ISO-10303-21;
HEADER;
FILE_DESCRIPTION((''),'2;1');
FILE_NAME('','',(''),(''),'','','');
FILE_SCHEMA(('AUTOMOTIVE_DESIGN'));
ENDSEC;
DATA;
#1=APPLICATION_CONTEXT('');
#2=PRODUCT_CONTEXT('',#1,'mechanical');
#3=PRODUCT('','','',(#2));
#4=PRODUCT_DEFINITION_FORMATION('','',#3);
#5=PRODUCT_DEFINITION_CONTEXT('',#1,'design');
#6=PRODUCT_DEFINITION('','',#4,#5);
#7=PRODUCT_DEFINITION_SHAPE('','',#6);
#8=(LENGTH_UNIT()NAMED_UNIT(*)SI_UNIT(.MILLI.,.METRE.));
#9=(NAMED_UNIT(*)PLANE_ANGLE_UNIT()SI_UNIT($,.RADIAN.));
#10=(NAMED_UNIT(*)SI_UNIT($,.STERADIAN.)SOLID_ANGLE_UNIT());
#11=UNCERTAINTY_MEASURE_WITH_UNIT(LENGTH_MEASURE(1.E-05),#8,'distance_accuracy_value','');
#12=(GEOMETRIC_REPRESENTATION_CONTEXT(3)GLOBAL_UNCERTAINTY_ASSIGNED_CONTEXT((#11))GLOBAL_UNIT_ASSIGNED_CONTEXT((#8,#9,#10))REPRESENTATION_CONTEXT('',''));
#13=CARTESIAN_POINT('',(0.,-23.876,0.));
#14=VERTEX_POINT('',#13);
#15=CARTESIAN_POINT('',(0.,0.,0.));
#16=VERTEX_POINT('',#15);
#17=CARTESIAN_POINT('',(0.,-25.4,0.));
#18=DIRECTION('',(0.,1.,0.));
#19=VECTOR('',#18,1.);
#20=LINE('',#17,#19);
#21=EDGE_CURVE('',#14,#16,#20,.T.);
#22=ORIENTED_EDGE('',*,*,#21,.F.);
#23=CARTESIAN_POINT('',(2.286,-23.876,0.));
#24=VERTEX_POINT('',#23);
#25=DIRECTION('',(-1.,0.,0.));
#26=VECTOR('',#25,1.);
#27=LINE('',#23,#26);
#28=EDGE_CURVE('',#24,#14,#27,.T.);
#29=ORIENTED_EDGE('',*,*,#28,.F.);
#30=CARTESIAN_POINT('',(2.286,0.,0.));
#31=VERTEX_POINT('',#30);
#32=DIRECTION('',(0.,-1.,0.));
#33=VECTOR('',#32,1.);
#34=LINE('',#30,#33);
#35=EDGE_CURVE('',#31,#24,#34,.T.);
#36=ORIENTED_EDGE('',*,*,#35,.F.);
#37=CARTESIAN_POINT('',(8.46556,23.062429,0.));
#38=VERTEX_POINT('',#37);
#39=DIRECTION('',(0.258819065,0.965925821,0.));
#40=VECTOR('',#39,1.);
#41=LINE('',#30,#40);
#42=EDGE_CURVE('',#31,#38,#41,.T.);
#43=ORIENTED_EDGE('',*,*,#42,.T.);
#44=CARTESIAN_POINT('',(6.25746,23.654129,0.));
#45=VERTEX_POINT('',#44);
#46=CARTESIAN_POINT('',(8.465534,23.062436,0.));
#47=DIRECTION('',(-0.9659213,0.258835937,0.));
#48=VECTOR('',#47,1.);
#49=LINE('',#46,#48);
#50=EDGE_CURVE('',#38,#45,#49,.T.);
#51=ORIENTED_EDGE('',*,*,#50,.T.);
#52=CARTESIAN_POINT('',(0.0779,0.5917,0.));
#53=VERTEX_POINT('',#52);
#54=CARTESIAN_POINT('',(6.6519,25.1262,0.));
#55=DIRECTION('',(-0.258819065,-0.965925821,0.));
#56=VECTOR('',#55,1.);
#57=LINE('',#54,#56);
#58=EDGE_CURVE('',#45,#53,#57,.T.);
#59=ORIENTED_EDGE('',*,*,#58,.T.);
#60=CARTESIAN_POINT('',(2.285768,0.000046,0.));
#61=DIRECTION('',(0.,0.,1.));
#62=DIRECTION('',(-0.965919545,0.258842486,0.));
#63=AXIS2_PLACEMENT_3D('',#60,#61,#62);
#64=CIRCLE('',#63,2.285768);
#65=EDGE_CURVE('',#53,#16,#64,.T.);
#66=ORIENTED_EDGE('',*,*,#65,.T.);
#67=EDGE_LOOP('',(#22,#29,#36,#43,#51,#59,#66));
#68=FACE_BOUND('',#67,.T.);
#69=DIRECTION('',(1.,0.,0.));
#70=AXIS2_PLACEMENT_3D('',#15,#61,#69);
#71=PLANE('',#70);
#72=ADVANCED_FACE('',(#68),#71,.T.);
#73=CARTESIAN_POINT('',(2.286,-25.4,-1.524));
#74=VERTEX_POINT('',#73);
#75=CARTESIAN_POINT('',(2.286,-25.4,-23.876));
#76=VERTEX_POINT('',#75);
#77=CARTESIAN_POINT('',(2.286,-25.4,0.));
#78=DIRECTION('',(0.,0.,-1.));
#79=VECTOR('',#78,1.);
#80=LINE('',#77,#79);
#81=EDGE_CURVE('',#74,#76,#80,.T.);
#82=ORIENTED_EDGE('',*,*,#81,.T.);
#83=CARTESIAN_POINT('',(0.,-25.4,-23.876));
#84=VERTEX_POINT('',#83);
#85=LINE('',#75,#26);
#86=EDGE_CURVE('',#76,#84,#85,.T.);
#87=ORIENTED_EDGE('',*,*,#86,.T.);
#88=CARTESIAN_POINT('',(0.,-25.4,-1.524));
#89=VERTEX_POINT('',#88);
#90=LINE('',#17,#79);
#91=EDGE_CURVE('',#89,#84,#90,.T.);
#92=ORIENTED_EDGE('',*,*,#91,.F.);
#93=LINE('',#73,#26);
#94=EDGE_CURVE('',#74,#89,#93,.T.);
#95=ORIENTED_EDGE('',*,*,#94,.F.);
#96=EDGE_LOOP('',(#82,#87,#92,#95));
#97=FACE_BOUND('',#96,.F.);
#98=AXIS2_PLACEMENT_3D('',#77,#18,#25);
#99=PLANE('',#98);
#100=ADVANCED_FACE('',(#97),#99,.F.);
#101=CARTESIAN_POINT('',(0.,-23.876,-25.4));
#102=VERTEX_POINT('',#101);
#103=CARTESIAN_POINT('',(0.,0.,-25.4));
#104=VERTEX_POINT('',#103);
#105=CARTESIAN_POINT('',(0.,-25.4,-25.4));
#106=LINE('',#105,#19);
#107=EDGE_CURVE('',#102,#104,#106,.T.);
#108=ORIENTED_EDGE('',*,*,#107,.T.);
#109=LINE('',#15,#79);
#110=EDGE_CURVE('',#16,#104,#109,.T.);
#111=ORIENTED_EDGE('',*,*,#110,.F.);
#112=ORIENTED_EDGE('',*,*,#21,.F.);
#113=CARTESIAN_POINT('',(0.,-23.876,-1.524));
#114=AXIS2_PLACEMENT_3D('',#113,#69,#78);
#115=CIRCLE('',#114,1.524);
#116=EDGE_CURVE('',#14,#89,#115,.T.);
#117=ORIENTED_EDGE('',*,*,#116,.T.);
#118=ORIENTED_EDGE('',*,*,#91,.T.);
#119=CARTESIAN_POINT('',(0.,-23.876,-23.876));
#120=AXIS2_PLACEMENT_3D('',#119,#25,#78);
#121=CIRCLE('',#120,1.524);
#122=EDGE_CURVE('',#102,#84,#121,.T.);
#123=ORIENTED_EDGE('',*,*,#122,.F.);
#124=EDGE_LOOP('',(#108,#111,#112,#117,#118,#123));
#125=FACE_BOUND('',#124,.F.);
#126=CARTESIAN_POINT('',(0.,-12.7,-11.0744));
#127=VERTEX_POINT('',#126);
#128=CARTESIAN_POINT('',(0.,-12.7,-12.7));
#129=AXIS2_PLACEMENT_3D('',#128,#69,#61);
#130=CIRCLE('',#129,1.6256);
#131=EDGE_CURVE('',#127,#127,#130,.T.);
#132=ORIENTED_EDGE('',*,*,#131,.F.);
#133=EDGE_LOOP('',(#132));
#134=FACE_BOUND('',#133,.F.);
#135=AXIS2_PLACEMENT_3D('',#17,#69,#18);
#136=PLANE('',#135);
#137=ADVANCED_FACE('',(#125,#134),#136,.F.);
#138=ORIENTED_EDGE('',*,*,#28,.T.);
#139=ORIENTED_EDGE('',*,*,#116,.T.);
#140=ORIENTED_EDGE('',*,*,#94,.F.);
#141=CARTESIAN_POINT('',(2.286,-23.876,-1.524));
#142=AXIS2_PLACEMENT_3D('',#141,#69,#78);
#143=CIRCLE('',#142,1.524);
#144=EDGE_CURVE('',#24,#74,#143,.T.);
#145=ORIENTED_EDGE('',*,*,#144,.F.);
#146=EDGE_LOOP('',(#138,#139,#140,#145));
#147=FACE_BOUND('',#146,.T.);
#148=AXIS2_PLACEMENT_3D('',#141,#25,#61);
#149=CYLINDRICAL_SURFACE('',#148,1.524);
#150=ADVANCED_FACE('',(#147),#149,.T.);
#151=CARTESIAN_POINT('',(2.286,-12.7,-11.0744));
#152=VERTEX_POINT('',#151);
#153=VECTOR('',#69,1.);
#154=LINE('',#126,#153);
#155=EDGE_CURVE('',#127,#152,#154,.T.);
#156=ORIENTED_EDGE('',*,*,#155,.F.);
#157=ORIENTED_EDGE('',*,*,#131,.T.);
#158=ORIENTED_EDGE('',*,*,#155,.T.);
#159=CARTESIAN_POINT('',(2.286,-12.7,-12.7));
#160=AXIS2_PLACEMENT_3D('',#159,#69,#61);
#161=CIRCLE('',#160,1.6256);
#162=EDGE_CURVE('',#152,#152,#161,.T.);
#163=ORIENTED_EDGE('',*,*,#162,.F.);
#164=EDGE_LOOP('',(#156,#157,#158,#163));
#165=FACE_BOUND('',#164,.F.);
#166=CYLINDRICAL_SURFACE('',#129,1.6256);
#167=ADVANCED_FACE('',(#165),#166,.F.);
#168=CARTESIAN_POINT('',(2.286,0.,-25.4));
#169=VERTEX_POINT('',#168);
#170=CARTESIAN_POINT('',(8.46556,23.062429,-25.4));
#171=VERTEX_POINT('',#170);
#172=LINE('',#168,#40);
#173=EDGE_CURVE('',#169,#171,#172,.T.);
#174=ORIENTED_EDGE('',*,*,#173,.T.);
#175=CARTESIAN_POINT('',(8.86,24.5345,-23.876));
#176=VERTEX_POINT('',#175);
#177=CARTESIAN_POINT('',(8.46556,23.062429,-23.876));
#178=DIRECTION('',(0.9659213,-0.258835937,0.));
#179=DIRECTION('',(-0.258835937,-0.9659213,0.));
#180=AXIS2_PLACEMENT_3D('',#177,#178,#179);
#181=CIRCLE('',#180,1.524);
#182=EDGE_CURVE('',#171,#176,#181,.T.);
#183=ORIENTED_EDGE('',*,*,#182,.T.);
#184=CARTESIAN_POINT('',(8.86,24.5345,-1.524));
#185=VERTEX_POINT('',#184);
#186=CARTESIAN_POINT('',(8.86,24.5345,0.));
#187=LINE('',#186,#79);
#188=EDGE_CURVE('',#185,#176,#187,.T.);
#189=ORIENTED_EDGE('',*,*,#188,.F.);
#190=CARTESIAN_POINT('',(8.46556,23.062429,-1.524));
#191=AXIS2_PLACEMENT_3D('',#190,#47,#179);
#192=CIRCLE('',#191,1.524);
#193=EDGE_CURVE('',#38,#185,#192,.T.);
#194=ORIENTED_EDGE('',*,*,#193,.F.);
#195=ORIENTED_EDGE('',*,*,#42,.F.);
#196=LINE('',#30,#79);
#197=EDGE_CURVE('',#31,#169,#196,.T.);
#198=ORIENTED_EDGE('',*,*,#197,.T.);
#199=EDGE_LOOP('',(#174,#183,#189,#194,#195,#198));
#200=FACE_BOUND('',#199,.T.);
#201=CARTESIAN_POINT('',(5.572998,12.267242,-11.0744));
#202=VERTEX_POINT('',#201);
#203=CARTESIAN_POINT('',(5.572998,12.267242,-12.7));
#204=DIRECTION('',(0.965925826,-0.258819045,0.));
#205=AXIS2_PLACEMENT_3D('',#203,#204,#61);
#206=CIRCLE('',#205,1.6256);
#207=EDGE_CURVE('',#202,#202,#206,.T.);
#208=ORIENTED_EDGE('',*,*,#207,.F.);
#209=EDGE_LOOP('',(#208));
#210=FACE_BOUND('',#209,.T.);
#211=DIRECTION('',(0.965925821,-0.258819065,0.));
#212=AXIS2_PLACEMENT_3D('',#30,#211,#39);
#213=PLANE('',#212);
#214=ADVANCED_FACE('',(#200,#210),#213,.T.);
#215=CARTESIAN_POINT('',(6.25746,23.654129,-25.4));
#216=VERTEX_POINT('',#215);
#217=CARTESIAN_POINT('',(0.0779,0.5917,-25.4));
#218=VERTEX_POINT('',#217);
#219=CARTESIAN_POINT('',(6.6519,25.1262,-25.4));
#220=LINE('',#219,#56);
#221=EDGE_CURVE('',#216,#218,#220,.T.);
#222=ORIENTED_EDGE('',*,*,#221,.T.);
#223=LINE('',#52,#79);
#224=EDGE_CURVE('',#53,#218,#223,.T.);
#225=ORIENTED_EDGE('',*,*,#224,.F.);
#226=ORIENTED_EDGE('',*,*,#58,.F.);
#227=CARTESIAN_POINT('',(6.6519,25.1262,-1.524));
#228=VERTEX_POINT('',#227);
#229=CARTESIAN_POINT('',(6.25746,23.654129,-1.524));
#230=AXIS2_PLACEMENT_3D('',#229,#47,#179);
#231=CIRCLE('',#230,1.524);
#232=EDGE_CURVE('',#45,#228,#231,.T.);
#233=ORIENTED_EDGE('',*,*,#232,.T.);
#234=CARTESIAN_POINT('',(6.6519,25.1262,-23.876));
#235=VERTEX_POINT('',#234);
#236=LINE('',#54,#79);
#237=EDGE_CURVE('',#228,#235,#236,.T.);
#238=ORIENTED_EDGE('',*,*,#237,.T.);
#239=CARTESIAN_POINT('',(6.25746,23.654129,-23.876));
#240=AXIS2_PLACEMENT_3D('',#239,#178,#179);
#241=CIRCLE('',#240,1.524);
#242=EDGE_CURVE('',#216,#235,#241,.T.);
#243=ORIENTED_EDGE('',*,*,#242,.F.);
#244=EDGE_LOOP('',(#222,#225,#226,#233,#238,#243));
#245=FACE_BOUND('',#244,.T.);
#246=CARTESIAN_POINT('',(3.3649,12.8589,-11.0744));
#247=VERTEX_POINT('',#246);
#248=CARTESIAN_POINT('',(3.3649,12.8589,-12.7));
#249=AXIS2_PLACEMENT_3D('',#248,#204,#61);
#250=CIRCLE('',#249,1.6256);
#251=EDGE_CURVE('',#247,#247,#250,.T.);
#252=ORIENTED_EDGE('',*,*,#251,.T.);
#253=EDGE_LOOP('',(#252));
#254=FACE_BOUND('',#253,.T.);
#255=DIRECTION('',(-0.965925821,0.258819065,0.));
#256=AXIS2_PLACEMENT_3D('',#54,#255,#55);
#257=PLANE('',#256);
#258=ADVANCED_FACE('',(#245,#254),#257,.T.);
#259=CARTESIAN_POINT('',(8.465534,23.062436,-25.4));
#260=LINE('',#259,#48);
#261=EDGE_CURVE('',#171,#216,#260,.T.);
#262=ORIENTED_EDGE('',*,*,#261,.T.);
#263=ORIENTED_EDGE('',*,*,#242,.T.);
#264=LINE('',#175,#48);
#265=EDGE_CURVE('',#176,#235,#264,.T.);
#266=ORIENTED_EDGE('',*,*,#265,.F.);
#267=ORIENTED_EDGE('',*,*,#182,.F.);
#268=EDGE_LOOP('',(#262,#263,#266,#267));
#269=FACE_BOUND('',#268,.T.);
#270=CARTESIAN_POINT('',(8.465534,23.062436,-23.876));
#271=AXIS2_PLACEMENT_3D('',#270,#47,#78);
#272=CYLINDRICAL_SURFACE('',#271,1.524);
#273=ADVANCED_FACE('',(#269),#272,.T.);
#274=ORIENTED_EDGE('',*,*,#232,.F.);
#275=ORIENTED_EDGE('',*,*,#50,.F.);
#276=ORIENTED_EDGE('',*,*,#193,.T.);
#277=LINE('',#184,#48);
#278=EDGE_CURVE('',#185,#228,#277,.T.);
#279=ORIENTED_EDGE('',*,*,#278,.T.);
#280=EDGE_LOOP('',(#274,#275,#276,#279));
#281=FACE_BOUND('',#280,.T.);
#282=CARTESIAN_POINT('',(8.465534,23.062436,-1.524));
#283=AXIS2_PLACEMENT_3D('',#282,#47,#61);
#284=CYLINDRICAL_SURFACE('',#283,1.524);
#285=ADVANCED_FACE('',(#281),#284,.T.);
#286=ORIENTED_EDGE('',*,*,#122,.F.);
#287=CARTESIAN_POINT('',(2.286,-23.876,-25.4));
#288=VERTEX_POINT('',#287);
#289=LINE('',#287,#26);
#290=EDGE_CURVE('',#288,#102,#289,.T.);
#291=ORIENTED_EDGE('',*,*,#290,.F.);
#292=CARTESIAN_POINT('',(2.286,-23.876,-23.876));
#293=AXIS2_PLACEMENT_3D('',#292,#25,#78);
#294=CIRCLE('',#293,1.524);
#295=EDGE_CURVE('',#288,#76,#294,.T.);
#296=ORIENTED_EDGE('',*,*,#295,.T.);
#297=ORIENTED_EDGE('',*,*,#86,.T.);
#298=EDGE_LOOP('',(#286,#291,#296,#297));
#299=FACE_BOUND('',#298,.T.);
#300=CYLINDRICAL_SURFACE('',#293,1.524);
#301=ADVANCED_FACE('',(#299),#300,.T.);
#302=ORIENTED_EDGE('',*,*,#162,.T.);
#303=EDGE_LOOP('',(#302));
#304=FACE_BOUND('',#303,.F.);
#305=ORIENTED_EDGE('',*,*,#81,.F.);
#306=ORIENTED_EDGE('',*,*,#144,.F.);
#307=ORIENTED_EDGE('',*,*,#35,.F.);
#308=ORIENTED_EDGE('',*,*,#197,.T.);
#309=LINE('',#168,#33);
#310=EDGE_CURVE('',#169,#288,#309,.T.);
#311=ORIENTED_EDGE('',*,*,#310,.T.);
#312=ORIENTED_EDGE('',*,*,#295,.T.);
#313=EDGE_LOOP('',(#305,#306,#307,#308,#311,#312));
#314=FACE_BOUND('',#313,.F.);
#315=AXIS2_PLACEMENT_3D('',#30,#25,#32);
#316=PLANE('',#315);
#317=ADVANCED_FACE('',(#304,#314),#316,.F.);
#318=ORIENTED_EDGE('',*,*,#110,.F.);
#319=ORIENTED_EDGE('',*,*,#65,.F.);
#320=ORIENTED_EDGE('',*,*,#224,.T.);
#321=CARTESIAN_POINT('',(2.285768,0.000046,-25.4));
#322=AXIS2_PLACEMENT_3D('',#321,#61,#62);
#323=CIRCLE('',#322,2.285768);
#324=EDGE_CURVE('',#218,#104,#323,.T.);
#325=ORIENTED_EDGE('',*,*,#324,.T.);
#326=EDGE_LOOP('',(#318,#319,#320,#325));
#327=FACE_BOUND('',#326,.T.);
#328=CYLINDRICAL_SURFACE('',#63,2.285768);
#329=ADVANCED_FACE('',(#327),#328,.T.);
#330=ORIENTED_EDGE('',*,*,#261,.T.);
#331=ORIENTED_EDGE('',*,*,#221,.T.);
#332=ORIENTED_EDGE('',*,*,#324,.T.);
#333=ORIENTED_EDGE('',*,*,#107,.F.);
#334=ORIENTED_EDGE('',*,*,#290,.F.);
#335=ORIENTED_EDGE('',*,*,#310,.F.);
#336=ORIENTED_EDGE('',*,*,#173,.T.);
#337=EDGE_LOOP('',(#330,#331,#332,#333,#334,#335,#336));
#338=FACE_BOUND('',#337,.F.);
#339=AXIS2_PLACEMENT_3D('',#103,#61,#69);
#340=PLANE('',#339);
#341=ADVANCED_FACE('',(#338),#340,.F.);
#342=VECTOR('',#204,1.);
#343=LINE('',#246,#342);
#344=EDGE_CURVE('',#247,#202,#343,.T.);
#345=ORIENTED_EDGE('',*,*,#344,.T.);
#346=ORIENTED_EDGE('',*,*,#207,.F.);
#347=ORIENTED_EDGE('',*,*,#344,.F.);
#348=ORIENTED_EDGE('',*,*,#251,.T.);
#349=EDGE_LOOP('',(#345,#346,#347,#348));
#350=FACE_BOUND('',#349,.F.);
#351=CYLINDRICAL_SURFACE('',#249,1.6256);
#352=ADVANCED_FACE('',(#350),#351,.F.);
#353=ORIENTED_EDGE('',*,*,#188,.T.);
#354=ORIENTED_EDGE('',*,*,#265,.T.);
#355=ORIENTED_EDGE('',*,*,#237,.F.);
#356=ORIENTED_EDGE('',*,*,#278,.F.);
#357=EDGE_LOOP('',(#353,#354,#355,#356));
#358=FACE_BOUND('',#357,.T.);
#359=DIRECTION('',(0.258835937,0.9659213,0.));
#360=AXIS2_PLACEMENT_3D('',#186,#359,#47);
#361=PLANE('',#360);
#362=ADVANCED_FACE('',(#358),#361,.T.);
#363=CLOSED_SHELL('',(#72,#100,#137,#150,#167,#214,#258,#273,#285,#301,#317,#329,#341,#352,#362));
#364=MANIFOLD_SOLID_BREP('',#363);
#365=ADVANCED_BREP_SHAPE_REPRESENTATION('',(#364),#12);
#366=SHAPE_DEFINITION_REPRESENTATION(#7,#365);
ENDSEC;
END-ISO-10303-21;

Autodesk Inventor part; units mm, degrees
ref_plane "YZ Plane" through (0, 0, 0) normal (1, 0, 0) x (0, 1, 0)
ref_plane "XZ Plane" through (0, 0, 0) normal (0, 1, 0) x (-1, 0, 0)
ref_plane "XY Plane" through (0, 0, 0) normal (0, 0, 1) x (1, 0, 0)
sketch "Sketch4" plane through (0, 0, 0) normal (0, 0, 1) x (1, 0, 0)
  line L0 (0, 0) -> (2.286, 0)
  line L1 (2.286, 0) -> (2.286, -25.4)
  line L2 (2.286, -25.4) -> (0, -25.4)
  line L3 (0, -25.4) -> (0, 0)
  line L4 (2.286, 0) -> (27.686, 0) construction
  line L5 (0.0779, 0.5917) -> (2.286, 0)
  arc A0 (0.0779, 0.5917) -> (0, 0) centre (2.286, 0) ccw
  line L6 (2.286, 0) -> (8.86, 24.5345)
  line L7 (2.286, 0) -> (27.686, 0) construction
  line L8 (8.86, 24.5345) -> (6.6519, 25.1262)
  line L9 (6.6519, 25.1262) -> (0.0779, 0.5917)
  dimension "d14" = 2.286
  dimension "d15" = 25.4
  dimension "d20" = 25.4
  dimension "d21" = 75
  dimension "d22" = 2.286
  dimension "d23" = 90
extrude "Extrusion2" add sketch "Sketch4" against normal blind 25.4
sketch "Sketch5" plane through (6.6519, 25.1262, -25.4) normal (-0.9659258, 0.258819, 0) x (0, 0, 1)
  line L0 (25.4, 0) -> (0, 0) projected
  line L1 (25.4, -25.4) -> (0, -25.4) projected
  point P0 (25.4, -25.9917)
  point P1 (12.7, -12.7)
  point P2 (12.7, 0)
  dimension "d26" = 12.7
sketch "Sketch6" plane through (0, -25.4, 0) normal (-1, 0, 0) x (0, 0, 1)
  line L0 (0, 0) -> (-25.4, 0) projected
  line L1 (0, 25.4) -> (-25.4, 25.4) projected
  point P0 (-12.7, 12.7)
  point P1 (-12.7, 0)
  dimension "d27" = 12.7
hole "Hole2" at (3.3649, 12.8589, -12.7) direction (0.9659258, -0.258819, 0) diameter 3.2512 end through all
hole "Hole3" at (0, -12.7, -12.7) direction (1, 0, 0) diameter 3.2512 end through all
fillet "Fillet2" radius 1.524 4 edges at (7.756, 24.8303, 0) (7.756, 24.8303, -25.4) (1.143, -25.4, -25.4) (1.143, -25.4, 0)
properties part number "am-2847" material "Steel"
